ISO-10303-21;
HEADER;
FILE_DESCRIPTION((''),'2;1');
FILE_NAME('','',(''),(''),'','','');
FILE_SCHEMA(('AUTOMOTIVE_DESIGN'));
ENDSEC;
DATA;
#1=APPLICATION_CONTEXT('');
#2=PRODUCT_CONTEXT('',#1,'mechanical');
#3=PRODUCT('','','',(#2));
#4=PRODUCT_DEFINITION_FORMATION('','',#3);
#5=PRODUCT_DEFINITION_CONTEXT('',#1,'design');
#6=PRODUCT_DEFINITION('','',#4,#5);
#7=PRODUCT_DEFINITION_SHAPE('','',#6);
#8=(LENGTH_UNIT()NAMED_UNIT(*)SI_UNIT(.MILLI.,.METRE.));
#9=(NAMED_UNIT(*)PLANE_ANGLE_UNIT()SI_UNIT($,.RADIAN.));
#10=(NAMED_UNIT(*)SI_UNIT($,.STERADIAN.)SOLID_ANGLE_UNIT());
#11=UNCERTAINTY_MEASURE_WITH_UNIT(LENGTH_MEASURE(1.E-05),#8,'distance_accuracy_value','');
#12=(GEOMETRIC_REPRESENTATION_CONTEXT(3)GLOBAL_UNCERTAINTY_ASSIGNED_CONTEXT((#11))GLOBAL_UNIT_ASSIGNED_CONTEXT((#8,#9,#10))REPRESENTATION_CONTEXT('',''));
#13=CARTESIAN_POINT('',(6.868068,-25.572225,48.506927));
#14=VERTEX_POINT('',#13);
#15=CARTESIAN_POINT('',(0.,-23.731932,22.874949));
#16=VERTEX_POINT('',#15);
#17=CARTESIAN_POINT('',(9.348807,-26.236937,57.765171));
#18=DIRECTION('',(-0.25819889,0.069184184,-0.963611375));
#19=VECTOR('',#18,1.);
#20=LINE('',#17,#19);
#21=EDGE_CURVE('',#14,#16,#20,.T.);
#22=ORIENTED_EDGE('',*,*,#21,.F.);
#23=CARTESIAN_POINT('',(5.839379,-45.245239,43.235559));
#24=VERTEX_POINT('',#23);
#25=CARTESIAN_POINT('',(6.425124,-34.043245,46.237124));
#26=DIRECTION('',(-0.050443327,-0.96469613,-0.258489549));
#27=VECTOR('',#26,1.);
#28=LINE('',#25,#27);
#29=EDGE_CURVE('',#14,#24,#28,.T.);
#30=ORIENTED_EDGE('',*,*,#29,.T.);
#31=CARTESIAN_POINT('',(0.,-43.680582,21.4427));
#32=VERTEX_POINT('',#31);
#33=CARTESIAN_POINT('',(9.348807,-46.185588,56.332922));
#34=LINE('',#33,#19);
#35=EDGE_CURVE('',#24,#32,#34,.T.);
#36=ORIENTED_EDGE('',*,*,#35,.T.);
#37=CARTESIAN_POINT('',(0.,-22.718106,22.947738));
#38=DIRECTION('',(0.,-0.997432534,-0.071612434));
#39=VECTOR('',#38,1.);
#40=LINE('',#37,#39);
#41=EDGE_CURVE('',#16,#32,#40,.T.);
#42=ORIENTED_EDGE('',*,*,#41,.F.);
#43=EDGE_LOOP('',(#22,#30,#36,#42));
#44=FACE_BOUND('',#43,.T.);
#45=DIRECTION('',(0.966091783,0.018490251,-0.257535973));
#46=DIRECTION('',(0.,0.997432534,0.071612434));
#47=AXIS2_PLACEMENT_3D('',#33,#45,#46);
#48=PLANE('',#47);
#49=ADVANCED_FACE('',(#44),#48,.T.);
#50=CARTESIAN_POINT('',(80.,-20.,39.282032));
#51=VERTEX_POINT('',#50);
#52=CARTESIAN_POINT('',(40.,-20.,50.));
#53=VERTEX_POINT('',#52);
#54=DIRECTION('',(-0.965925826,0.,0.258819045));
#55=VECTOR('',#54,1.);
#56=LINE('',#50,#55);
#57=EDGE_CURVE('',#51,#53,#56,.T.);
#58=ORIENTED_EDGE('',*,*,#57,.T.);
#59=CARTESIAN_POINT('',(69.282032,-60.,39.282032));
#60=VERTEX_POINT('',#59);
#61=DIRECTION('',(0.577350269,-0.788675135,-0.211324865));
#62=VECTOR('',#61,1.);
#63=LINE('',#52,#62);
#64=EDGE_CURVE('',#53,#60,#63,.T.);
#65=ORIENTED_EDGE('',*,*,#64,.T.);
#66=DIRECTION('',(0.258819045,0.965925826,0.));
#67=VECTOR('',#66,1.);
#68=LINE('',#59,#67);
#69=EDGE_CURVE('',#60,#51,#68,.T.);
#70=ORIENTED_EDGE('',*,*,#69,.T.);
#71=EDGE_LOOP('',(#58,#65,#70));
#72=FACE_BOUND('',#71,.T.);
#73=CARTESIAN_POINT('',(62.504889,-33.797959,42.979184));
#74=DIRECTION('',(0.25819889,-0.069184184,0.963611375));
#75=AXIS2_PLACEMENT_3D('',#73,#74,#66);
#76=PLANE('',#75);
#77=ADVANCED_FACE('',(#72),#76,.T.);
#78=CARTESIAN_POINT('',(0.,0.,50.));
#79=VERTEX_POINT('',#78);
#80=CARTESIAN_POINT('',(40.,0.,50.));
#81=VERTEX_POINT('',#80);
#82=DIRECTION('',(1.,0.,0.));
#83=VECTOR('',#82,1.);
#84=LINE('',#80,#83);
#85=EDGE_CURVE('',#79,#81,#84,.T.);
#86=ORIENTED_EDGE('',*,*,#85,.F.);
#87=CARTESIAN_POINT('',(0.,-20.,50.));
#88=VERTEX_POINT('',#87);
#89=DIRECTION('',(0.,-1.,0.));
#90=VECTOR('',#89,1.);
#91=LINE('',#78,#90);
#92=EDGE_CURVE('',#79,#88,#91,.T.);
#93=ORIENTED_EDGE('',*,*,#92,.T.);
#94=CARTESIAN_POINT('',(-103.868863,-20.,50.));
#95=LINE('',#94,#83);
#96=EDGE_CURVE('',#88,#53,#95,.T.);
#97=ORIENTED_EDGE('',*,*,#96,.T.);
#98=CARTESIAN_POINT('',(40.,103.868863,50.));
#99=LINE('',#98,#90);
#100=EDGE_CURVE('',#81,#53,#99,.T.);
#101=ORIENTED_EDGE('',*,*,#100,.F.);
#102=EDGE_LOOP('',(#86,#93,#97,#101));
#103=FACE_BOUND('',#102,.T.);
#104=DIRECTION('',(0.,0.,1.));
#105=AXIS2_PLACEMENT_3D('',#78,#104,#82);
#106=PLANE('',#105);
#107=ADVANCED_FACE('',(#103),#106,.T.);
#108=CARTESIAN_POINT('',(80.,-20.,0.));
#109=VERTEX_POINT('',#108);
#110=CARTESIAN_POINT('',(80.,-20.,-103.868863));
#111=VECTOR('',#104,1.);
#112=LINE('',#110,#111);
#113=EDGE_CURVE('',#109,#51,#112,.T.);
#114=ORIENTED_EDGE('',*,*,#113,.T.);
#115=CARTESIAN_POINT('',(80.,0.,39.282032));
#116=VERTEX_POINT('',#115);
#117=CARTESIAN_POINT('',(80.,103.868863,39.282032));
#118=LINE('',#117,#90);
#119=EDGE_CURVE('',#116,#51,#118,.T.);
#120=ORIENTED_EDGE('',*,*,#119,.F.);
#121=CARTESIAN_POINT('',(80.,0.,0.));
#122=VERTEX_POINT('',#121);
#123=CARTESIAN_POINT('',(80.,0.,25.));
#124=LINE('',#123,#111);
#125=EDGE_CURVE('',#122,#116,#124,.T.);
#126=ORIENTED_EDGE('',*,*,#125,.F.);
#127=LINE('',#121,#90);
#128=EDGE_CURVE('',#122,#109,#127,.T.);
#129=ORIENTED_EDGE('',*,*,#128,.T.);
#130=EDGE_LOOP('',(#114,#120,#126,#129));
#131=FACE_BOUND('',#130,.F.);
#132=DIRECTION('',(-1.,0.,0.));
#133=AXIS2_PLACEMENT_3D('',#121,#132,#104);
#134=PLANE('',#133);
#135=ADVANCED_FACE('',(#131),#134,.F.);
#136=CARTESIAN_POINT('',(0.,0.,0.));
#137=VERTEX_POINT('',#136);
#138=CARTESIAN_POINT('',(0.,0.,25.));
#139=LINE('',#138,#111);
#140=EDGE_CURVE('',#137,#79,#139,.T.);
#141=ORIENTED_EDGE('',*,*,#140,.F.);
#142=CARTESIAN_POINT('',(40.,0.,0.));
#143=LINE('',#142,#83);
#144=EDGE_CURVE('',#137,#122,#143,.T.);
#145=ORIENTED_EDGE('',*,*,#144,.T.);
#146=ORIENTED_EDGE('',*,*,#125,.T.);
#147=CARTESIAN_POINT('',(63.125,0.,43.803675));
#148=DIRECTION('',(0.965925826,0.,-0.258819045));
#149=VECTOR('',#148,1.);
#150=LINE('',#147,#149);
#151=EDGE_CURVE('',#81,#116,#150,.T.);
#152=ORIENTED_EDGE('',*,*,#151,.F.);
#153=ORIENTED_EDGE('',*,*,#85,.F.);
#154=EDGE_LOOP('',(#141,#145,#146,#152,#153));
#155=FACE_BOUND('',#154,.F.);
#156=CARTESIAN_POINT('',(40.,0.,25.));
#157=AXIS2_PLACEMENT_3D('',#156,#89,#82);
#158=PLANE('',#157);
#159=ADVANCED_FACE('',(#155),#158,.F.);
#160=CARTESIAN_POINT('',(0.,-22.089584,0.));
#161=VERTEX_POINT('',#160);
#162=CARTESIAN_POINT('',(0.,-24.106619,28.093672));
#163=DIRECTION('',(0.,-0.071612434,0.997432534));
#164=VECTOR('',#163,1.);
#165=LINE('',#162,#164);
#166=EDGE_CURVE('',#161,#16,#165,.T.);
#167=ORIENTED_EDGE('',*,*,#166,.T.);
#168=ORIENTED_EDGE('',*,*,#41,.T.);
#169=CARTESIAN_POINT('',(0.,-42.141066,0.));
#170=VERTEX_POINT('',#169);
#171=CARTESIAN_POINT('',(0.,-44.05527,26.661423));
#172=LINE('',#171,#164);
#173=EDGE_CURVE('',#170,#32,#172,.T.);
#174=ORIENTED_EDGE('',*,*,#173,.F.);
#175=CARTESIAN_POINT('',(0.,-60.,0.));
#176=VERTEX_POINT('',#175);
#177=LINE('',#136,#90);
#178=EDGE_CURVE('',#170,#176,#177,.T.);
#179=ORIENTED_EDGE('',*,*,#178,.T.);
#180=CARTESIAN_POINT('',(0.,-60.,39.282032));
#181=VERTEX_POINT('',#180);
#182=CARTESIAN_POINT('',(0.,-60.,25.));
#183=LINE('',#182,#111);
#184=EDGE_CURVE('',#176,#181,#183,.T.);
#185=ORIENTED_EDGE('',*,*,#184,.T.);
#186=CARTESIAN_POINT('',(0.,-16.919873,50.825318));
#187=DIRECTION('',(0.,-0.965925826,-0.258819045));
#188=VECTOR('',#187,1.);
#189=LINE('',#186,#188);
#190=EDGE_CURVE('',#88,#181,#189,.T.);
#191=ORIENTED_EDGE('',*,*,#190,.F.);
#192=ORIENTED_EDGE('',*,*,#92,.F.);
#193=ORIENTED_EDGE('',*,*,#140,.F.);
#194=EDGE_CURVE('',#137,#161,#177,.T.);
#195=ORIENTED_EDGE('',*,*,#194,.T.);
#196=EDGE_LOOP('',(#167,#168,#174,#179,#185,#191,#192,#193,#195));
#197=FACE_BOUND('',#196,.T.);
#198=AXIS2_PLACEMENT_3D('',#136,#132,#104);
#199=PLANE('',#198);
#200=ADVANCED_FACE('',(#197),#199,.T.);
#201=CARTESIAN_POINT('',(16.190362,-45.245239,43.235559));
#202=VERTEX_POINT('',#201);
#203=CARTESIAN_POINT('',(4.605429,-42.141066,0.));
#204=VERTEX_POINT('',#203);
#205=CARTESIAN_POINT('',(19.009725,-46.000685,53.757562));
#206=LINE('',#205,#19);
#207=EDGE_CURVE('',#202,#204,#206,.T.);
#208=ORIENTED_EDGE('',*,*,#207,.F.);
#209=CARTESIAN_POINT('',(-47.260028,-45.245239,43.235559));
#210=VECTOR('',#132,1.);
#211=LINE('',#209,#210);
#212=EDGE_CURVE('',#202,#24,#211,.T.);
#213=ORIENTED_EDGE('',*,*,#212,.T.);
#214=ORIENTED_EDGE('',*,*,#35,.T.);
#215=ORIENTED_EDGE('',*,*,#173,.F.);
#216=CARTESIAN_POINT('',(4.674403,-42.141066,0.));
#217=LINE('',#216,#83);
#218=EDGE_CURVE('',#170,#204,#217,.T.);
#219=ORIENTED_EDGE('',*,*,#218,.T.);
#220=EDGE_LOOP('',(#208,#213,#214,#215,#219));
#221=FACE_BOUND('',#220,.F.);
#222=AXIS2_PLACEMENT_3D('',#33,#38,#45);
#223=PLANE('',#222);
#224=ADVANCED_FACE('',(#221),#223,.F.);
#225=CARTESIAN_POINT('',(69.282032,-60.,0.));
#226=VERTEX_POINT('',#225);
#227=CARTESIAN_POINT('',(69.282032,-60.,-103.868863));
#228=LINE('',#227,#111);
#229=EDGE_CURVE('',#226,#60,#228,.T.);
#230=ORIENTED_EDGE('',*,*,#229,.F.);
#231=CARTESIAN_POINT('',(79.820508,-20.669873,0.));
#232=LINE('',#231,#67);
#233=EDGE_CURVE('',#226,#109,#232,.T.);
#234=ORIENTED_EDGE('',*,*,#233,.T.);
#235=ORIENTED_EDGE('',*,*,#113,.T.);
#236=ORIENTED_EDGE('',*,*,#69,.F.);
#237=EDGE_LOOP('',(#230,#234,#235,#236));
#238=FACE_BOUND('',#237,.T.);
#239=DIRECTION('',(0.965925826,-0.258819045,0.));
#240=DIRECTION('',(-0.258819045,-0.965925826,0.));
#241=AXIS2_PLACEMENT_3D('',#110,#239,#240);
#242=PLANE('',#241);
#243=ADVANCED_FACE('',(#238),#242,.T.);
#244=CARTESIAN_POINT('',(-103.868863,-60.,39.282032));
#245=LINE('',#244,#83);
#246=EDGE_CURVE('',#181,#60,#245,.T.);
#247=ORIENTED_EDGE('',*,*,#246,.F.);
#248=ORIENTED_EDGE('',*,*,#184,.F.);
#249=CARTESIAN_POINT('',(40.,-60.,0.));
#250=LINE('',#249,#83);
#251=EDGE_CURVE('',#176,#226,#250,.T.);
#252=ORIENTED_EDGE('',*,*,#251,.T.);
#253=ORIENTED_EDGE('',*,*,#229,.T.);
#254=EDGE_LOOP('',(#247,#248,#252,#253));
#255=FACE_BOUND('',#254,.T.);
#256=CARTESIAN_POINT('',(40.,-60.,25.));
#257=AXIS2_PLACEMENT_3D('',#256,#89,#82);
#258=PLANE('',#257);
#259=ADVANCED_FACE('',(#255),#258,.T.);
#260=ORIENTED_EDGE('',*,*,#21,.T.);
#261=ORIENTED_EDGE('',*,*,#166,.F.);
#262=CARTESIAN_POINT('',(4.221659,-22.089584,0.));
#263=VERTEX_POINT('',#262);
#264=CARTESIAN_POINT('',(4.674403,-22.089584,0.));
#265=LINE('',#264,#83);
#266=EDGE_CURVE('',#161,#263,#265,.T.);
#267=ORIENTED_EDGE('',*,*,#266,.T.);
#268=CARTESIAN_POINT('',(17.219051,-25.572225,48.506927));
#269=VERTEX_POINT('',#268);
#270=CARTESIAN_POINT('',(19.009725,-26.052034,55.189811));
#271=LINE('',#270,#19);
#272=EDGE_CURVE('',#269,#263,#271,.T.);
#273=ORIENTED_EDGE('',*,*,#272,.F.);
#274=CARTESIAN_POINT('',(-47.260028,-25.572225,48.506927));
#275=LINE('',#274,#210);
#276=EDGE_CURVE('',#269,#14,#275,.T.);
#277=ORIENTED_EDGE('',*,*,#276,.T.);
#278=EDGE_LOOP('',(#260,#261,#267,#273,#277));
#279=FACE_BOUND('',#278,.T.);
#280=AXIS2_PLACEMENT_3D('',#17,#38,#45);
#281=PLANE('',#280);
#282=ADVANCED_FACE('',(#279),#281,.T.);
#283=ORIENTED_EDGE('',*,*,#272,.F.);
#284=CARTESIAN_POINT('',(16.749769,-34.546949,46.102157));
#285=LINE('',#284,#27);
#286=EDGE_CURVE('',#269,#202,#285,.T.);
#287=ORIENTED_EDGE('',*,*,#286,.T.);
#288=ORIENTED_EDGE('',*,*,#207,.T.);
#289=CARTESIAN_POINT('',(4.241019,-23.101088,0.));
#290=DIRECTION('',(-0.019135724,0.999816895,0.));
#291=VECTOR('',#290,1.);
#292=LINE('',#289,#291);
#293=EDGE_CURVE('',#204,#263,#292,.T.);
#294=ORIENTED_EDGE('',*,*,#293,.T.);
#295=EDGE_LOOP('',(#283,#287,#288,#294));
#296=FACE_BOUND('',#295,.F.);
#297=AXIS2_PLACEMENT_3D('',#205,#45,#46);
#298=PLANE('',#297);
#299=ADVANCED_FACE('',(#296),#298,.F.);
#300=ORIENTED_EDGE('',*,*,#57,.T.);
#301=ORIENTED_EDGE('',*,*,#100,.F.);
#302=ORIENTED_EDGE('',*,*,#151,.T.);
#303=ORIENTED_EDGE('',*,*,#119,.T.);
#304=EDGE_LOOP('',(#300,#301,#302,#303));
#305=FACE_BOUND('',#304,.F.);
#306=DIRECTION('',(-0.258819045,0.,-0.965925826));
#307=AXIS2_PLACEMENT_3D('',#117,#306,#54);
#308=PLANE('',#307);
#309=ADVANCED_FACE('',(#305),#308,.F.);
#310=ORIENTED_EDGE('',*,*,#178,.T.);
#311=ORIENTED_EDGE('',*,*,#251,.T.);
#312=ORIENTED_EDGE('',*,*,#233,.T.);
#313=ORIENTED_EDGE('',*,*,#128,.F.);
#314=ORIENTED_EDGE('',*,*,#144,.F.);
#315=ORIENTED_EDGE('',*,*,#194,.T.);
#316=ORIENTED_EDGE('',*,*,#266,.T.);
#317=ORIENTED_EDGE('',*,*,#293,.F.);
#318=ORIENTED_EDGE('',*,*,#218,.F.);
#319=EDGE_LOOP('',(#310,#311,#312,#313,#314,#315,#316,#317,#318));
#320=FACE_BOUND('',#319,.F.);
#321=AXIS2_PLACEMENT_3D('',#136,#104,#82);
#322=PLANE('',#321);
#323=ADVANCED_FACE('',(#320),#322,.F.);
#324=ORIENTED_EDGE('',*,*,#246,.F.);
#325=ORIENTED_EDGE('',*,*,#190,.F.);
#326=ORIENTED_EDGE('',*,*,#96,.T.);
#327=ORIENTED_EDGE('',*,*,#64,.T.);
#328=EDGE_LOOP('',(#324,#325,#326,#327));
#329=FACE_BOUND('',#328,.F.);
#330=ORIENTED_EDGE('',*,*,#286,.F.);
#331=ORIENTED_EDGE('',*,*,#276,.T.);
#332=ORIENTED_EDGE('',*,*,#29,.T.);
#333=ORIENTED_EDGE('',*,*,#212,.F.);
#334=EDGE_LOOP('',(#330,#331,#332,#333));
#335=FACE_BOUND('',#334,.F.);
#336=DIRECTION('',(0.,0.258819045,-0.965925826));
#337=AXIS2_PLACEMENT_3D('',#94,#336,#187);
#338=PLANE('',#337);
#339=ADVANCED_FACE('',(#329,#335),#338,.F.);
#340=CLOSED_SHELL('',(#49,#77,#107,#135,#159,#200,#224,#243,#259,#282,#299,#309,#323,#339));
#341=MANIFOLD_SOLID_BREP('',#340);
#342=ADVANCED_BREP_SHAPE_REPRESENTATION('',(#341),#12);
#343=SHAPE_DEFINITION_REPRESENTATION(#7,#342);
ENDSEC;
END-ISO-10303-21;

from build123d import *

# Parameters (mm, degrees)
F0_W        = 80
F0_H        = 50
F1_DEPTH    = 60
F2_T1_DEPTH = 14.4048552446
F2_T3_DEPTH = 287.737725616
F2_T5_DEPTH = 267.737725616
F2_T7_DEPTH = 257.737725616
F3_W        = 10
F3_H        = 20
F4_DEPTH    = 59.8932080195


# Not quite as in the source:
# - a fillet or chamfer that OpenCascade refuses, or shapes differently, is made with other operations: its cross-section is extruded or revolved along the edge and cut away or added


with BuildPart() as f1:
    # F0 (on Front) → F1 (new body)
    with BuildSketch(Plane.XZ):
        with Locations((40, 25)):
            Rectangle(F0_W, F0_H)
    extrude(amount=F1_DEPTH)

    # F2: chamfer of 40 x 10.7179676972 on 3 edges, made by hand

    # F2_s2 → F2_t1 (cut)
    with BuildSketch(Plane(origin=(15.4641016151, -4.1435935394, 57.7128129211), x_dir=(0.2588190451, 0.9659258263, 0), z_dir=(0.2581988897, -0.069184184, 0.963611375))):
        Polygon((1.3870070824, -68.9498200994), (-8.9657547217, -28.8537460449), (-40.024040134, -68.9498200994), align=None)
    extrude(amount=F2_T1_DEPTH, mode=Mode.SUBTRACT)

    # F2_s4 → F2_t3 (cut)
    with BuildSketch(Plane.YZ.offset(-103.868862808)):
        Polygon((-20, 50), (-60, 39.2820323028), (-60, 50), align=None)
    extrude(amount=F2_T3_DEPTH, mode=Mode.SUBTRACT)

    # F2_s6 → F2_t5 (cut)
    with BuildSketch(Plane.XZ.offset(-103.868862808)):
        Polygon((80, 39.2820323028), (40, 50), (80, 50), align=None)
    extrude(amount=F2_T5_DEPTH, mode=Mode.SUBTRACT)

    # F2_s8 → F2_t7 (cut)
    with BuildSketch(Plane.XY.offset(-103.868862808)):
        Polygon((80, -20), (69.2820323028, -60), (80, -60), align=None)
    extrude(amount=F2_T7_DEPTH, mode=Mode.SUBTRACT)

    # F3 (on face) → F4 (cut, through all)
    with BuildSketch(Plane(origin=(15.4641016151, -4.1435935394, 57.7128129211), x_dir=(0.9660917831, 0.0184902509, -0.2575359728), z_dir=(0.2581988897, -0.069184184, 0.963611375))):
        with Locations((-1.3299316186, -32.0328700794)):
            Rectangle(F3_W, F3_H)
    extrude(amount=-F4_DEPTH, mode=Mode.SUBTRACT)


solid = f1.part
